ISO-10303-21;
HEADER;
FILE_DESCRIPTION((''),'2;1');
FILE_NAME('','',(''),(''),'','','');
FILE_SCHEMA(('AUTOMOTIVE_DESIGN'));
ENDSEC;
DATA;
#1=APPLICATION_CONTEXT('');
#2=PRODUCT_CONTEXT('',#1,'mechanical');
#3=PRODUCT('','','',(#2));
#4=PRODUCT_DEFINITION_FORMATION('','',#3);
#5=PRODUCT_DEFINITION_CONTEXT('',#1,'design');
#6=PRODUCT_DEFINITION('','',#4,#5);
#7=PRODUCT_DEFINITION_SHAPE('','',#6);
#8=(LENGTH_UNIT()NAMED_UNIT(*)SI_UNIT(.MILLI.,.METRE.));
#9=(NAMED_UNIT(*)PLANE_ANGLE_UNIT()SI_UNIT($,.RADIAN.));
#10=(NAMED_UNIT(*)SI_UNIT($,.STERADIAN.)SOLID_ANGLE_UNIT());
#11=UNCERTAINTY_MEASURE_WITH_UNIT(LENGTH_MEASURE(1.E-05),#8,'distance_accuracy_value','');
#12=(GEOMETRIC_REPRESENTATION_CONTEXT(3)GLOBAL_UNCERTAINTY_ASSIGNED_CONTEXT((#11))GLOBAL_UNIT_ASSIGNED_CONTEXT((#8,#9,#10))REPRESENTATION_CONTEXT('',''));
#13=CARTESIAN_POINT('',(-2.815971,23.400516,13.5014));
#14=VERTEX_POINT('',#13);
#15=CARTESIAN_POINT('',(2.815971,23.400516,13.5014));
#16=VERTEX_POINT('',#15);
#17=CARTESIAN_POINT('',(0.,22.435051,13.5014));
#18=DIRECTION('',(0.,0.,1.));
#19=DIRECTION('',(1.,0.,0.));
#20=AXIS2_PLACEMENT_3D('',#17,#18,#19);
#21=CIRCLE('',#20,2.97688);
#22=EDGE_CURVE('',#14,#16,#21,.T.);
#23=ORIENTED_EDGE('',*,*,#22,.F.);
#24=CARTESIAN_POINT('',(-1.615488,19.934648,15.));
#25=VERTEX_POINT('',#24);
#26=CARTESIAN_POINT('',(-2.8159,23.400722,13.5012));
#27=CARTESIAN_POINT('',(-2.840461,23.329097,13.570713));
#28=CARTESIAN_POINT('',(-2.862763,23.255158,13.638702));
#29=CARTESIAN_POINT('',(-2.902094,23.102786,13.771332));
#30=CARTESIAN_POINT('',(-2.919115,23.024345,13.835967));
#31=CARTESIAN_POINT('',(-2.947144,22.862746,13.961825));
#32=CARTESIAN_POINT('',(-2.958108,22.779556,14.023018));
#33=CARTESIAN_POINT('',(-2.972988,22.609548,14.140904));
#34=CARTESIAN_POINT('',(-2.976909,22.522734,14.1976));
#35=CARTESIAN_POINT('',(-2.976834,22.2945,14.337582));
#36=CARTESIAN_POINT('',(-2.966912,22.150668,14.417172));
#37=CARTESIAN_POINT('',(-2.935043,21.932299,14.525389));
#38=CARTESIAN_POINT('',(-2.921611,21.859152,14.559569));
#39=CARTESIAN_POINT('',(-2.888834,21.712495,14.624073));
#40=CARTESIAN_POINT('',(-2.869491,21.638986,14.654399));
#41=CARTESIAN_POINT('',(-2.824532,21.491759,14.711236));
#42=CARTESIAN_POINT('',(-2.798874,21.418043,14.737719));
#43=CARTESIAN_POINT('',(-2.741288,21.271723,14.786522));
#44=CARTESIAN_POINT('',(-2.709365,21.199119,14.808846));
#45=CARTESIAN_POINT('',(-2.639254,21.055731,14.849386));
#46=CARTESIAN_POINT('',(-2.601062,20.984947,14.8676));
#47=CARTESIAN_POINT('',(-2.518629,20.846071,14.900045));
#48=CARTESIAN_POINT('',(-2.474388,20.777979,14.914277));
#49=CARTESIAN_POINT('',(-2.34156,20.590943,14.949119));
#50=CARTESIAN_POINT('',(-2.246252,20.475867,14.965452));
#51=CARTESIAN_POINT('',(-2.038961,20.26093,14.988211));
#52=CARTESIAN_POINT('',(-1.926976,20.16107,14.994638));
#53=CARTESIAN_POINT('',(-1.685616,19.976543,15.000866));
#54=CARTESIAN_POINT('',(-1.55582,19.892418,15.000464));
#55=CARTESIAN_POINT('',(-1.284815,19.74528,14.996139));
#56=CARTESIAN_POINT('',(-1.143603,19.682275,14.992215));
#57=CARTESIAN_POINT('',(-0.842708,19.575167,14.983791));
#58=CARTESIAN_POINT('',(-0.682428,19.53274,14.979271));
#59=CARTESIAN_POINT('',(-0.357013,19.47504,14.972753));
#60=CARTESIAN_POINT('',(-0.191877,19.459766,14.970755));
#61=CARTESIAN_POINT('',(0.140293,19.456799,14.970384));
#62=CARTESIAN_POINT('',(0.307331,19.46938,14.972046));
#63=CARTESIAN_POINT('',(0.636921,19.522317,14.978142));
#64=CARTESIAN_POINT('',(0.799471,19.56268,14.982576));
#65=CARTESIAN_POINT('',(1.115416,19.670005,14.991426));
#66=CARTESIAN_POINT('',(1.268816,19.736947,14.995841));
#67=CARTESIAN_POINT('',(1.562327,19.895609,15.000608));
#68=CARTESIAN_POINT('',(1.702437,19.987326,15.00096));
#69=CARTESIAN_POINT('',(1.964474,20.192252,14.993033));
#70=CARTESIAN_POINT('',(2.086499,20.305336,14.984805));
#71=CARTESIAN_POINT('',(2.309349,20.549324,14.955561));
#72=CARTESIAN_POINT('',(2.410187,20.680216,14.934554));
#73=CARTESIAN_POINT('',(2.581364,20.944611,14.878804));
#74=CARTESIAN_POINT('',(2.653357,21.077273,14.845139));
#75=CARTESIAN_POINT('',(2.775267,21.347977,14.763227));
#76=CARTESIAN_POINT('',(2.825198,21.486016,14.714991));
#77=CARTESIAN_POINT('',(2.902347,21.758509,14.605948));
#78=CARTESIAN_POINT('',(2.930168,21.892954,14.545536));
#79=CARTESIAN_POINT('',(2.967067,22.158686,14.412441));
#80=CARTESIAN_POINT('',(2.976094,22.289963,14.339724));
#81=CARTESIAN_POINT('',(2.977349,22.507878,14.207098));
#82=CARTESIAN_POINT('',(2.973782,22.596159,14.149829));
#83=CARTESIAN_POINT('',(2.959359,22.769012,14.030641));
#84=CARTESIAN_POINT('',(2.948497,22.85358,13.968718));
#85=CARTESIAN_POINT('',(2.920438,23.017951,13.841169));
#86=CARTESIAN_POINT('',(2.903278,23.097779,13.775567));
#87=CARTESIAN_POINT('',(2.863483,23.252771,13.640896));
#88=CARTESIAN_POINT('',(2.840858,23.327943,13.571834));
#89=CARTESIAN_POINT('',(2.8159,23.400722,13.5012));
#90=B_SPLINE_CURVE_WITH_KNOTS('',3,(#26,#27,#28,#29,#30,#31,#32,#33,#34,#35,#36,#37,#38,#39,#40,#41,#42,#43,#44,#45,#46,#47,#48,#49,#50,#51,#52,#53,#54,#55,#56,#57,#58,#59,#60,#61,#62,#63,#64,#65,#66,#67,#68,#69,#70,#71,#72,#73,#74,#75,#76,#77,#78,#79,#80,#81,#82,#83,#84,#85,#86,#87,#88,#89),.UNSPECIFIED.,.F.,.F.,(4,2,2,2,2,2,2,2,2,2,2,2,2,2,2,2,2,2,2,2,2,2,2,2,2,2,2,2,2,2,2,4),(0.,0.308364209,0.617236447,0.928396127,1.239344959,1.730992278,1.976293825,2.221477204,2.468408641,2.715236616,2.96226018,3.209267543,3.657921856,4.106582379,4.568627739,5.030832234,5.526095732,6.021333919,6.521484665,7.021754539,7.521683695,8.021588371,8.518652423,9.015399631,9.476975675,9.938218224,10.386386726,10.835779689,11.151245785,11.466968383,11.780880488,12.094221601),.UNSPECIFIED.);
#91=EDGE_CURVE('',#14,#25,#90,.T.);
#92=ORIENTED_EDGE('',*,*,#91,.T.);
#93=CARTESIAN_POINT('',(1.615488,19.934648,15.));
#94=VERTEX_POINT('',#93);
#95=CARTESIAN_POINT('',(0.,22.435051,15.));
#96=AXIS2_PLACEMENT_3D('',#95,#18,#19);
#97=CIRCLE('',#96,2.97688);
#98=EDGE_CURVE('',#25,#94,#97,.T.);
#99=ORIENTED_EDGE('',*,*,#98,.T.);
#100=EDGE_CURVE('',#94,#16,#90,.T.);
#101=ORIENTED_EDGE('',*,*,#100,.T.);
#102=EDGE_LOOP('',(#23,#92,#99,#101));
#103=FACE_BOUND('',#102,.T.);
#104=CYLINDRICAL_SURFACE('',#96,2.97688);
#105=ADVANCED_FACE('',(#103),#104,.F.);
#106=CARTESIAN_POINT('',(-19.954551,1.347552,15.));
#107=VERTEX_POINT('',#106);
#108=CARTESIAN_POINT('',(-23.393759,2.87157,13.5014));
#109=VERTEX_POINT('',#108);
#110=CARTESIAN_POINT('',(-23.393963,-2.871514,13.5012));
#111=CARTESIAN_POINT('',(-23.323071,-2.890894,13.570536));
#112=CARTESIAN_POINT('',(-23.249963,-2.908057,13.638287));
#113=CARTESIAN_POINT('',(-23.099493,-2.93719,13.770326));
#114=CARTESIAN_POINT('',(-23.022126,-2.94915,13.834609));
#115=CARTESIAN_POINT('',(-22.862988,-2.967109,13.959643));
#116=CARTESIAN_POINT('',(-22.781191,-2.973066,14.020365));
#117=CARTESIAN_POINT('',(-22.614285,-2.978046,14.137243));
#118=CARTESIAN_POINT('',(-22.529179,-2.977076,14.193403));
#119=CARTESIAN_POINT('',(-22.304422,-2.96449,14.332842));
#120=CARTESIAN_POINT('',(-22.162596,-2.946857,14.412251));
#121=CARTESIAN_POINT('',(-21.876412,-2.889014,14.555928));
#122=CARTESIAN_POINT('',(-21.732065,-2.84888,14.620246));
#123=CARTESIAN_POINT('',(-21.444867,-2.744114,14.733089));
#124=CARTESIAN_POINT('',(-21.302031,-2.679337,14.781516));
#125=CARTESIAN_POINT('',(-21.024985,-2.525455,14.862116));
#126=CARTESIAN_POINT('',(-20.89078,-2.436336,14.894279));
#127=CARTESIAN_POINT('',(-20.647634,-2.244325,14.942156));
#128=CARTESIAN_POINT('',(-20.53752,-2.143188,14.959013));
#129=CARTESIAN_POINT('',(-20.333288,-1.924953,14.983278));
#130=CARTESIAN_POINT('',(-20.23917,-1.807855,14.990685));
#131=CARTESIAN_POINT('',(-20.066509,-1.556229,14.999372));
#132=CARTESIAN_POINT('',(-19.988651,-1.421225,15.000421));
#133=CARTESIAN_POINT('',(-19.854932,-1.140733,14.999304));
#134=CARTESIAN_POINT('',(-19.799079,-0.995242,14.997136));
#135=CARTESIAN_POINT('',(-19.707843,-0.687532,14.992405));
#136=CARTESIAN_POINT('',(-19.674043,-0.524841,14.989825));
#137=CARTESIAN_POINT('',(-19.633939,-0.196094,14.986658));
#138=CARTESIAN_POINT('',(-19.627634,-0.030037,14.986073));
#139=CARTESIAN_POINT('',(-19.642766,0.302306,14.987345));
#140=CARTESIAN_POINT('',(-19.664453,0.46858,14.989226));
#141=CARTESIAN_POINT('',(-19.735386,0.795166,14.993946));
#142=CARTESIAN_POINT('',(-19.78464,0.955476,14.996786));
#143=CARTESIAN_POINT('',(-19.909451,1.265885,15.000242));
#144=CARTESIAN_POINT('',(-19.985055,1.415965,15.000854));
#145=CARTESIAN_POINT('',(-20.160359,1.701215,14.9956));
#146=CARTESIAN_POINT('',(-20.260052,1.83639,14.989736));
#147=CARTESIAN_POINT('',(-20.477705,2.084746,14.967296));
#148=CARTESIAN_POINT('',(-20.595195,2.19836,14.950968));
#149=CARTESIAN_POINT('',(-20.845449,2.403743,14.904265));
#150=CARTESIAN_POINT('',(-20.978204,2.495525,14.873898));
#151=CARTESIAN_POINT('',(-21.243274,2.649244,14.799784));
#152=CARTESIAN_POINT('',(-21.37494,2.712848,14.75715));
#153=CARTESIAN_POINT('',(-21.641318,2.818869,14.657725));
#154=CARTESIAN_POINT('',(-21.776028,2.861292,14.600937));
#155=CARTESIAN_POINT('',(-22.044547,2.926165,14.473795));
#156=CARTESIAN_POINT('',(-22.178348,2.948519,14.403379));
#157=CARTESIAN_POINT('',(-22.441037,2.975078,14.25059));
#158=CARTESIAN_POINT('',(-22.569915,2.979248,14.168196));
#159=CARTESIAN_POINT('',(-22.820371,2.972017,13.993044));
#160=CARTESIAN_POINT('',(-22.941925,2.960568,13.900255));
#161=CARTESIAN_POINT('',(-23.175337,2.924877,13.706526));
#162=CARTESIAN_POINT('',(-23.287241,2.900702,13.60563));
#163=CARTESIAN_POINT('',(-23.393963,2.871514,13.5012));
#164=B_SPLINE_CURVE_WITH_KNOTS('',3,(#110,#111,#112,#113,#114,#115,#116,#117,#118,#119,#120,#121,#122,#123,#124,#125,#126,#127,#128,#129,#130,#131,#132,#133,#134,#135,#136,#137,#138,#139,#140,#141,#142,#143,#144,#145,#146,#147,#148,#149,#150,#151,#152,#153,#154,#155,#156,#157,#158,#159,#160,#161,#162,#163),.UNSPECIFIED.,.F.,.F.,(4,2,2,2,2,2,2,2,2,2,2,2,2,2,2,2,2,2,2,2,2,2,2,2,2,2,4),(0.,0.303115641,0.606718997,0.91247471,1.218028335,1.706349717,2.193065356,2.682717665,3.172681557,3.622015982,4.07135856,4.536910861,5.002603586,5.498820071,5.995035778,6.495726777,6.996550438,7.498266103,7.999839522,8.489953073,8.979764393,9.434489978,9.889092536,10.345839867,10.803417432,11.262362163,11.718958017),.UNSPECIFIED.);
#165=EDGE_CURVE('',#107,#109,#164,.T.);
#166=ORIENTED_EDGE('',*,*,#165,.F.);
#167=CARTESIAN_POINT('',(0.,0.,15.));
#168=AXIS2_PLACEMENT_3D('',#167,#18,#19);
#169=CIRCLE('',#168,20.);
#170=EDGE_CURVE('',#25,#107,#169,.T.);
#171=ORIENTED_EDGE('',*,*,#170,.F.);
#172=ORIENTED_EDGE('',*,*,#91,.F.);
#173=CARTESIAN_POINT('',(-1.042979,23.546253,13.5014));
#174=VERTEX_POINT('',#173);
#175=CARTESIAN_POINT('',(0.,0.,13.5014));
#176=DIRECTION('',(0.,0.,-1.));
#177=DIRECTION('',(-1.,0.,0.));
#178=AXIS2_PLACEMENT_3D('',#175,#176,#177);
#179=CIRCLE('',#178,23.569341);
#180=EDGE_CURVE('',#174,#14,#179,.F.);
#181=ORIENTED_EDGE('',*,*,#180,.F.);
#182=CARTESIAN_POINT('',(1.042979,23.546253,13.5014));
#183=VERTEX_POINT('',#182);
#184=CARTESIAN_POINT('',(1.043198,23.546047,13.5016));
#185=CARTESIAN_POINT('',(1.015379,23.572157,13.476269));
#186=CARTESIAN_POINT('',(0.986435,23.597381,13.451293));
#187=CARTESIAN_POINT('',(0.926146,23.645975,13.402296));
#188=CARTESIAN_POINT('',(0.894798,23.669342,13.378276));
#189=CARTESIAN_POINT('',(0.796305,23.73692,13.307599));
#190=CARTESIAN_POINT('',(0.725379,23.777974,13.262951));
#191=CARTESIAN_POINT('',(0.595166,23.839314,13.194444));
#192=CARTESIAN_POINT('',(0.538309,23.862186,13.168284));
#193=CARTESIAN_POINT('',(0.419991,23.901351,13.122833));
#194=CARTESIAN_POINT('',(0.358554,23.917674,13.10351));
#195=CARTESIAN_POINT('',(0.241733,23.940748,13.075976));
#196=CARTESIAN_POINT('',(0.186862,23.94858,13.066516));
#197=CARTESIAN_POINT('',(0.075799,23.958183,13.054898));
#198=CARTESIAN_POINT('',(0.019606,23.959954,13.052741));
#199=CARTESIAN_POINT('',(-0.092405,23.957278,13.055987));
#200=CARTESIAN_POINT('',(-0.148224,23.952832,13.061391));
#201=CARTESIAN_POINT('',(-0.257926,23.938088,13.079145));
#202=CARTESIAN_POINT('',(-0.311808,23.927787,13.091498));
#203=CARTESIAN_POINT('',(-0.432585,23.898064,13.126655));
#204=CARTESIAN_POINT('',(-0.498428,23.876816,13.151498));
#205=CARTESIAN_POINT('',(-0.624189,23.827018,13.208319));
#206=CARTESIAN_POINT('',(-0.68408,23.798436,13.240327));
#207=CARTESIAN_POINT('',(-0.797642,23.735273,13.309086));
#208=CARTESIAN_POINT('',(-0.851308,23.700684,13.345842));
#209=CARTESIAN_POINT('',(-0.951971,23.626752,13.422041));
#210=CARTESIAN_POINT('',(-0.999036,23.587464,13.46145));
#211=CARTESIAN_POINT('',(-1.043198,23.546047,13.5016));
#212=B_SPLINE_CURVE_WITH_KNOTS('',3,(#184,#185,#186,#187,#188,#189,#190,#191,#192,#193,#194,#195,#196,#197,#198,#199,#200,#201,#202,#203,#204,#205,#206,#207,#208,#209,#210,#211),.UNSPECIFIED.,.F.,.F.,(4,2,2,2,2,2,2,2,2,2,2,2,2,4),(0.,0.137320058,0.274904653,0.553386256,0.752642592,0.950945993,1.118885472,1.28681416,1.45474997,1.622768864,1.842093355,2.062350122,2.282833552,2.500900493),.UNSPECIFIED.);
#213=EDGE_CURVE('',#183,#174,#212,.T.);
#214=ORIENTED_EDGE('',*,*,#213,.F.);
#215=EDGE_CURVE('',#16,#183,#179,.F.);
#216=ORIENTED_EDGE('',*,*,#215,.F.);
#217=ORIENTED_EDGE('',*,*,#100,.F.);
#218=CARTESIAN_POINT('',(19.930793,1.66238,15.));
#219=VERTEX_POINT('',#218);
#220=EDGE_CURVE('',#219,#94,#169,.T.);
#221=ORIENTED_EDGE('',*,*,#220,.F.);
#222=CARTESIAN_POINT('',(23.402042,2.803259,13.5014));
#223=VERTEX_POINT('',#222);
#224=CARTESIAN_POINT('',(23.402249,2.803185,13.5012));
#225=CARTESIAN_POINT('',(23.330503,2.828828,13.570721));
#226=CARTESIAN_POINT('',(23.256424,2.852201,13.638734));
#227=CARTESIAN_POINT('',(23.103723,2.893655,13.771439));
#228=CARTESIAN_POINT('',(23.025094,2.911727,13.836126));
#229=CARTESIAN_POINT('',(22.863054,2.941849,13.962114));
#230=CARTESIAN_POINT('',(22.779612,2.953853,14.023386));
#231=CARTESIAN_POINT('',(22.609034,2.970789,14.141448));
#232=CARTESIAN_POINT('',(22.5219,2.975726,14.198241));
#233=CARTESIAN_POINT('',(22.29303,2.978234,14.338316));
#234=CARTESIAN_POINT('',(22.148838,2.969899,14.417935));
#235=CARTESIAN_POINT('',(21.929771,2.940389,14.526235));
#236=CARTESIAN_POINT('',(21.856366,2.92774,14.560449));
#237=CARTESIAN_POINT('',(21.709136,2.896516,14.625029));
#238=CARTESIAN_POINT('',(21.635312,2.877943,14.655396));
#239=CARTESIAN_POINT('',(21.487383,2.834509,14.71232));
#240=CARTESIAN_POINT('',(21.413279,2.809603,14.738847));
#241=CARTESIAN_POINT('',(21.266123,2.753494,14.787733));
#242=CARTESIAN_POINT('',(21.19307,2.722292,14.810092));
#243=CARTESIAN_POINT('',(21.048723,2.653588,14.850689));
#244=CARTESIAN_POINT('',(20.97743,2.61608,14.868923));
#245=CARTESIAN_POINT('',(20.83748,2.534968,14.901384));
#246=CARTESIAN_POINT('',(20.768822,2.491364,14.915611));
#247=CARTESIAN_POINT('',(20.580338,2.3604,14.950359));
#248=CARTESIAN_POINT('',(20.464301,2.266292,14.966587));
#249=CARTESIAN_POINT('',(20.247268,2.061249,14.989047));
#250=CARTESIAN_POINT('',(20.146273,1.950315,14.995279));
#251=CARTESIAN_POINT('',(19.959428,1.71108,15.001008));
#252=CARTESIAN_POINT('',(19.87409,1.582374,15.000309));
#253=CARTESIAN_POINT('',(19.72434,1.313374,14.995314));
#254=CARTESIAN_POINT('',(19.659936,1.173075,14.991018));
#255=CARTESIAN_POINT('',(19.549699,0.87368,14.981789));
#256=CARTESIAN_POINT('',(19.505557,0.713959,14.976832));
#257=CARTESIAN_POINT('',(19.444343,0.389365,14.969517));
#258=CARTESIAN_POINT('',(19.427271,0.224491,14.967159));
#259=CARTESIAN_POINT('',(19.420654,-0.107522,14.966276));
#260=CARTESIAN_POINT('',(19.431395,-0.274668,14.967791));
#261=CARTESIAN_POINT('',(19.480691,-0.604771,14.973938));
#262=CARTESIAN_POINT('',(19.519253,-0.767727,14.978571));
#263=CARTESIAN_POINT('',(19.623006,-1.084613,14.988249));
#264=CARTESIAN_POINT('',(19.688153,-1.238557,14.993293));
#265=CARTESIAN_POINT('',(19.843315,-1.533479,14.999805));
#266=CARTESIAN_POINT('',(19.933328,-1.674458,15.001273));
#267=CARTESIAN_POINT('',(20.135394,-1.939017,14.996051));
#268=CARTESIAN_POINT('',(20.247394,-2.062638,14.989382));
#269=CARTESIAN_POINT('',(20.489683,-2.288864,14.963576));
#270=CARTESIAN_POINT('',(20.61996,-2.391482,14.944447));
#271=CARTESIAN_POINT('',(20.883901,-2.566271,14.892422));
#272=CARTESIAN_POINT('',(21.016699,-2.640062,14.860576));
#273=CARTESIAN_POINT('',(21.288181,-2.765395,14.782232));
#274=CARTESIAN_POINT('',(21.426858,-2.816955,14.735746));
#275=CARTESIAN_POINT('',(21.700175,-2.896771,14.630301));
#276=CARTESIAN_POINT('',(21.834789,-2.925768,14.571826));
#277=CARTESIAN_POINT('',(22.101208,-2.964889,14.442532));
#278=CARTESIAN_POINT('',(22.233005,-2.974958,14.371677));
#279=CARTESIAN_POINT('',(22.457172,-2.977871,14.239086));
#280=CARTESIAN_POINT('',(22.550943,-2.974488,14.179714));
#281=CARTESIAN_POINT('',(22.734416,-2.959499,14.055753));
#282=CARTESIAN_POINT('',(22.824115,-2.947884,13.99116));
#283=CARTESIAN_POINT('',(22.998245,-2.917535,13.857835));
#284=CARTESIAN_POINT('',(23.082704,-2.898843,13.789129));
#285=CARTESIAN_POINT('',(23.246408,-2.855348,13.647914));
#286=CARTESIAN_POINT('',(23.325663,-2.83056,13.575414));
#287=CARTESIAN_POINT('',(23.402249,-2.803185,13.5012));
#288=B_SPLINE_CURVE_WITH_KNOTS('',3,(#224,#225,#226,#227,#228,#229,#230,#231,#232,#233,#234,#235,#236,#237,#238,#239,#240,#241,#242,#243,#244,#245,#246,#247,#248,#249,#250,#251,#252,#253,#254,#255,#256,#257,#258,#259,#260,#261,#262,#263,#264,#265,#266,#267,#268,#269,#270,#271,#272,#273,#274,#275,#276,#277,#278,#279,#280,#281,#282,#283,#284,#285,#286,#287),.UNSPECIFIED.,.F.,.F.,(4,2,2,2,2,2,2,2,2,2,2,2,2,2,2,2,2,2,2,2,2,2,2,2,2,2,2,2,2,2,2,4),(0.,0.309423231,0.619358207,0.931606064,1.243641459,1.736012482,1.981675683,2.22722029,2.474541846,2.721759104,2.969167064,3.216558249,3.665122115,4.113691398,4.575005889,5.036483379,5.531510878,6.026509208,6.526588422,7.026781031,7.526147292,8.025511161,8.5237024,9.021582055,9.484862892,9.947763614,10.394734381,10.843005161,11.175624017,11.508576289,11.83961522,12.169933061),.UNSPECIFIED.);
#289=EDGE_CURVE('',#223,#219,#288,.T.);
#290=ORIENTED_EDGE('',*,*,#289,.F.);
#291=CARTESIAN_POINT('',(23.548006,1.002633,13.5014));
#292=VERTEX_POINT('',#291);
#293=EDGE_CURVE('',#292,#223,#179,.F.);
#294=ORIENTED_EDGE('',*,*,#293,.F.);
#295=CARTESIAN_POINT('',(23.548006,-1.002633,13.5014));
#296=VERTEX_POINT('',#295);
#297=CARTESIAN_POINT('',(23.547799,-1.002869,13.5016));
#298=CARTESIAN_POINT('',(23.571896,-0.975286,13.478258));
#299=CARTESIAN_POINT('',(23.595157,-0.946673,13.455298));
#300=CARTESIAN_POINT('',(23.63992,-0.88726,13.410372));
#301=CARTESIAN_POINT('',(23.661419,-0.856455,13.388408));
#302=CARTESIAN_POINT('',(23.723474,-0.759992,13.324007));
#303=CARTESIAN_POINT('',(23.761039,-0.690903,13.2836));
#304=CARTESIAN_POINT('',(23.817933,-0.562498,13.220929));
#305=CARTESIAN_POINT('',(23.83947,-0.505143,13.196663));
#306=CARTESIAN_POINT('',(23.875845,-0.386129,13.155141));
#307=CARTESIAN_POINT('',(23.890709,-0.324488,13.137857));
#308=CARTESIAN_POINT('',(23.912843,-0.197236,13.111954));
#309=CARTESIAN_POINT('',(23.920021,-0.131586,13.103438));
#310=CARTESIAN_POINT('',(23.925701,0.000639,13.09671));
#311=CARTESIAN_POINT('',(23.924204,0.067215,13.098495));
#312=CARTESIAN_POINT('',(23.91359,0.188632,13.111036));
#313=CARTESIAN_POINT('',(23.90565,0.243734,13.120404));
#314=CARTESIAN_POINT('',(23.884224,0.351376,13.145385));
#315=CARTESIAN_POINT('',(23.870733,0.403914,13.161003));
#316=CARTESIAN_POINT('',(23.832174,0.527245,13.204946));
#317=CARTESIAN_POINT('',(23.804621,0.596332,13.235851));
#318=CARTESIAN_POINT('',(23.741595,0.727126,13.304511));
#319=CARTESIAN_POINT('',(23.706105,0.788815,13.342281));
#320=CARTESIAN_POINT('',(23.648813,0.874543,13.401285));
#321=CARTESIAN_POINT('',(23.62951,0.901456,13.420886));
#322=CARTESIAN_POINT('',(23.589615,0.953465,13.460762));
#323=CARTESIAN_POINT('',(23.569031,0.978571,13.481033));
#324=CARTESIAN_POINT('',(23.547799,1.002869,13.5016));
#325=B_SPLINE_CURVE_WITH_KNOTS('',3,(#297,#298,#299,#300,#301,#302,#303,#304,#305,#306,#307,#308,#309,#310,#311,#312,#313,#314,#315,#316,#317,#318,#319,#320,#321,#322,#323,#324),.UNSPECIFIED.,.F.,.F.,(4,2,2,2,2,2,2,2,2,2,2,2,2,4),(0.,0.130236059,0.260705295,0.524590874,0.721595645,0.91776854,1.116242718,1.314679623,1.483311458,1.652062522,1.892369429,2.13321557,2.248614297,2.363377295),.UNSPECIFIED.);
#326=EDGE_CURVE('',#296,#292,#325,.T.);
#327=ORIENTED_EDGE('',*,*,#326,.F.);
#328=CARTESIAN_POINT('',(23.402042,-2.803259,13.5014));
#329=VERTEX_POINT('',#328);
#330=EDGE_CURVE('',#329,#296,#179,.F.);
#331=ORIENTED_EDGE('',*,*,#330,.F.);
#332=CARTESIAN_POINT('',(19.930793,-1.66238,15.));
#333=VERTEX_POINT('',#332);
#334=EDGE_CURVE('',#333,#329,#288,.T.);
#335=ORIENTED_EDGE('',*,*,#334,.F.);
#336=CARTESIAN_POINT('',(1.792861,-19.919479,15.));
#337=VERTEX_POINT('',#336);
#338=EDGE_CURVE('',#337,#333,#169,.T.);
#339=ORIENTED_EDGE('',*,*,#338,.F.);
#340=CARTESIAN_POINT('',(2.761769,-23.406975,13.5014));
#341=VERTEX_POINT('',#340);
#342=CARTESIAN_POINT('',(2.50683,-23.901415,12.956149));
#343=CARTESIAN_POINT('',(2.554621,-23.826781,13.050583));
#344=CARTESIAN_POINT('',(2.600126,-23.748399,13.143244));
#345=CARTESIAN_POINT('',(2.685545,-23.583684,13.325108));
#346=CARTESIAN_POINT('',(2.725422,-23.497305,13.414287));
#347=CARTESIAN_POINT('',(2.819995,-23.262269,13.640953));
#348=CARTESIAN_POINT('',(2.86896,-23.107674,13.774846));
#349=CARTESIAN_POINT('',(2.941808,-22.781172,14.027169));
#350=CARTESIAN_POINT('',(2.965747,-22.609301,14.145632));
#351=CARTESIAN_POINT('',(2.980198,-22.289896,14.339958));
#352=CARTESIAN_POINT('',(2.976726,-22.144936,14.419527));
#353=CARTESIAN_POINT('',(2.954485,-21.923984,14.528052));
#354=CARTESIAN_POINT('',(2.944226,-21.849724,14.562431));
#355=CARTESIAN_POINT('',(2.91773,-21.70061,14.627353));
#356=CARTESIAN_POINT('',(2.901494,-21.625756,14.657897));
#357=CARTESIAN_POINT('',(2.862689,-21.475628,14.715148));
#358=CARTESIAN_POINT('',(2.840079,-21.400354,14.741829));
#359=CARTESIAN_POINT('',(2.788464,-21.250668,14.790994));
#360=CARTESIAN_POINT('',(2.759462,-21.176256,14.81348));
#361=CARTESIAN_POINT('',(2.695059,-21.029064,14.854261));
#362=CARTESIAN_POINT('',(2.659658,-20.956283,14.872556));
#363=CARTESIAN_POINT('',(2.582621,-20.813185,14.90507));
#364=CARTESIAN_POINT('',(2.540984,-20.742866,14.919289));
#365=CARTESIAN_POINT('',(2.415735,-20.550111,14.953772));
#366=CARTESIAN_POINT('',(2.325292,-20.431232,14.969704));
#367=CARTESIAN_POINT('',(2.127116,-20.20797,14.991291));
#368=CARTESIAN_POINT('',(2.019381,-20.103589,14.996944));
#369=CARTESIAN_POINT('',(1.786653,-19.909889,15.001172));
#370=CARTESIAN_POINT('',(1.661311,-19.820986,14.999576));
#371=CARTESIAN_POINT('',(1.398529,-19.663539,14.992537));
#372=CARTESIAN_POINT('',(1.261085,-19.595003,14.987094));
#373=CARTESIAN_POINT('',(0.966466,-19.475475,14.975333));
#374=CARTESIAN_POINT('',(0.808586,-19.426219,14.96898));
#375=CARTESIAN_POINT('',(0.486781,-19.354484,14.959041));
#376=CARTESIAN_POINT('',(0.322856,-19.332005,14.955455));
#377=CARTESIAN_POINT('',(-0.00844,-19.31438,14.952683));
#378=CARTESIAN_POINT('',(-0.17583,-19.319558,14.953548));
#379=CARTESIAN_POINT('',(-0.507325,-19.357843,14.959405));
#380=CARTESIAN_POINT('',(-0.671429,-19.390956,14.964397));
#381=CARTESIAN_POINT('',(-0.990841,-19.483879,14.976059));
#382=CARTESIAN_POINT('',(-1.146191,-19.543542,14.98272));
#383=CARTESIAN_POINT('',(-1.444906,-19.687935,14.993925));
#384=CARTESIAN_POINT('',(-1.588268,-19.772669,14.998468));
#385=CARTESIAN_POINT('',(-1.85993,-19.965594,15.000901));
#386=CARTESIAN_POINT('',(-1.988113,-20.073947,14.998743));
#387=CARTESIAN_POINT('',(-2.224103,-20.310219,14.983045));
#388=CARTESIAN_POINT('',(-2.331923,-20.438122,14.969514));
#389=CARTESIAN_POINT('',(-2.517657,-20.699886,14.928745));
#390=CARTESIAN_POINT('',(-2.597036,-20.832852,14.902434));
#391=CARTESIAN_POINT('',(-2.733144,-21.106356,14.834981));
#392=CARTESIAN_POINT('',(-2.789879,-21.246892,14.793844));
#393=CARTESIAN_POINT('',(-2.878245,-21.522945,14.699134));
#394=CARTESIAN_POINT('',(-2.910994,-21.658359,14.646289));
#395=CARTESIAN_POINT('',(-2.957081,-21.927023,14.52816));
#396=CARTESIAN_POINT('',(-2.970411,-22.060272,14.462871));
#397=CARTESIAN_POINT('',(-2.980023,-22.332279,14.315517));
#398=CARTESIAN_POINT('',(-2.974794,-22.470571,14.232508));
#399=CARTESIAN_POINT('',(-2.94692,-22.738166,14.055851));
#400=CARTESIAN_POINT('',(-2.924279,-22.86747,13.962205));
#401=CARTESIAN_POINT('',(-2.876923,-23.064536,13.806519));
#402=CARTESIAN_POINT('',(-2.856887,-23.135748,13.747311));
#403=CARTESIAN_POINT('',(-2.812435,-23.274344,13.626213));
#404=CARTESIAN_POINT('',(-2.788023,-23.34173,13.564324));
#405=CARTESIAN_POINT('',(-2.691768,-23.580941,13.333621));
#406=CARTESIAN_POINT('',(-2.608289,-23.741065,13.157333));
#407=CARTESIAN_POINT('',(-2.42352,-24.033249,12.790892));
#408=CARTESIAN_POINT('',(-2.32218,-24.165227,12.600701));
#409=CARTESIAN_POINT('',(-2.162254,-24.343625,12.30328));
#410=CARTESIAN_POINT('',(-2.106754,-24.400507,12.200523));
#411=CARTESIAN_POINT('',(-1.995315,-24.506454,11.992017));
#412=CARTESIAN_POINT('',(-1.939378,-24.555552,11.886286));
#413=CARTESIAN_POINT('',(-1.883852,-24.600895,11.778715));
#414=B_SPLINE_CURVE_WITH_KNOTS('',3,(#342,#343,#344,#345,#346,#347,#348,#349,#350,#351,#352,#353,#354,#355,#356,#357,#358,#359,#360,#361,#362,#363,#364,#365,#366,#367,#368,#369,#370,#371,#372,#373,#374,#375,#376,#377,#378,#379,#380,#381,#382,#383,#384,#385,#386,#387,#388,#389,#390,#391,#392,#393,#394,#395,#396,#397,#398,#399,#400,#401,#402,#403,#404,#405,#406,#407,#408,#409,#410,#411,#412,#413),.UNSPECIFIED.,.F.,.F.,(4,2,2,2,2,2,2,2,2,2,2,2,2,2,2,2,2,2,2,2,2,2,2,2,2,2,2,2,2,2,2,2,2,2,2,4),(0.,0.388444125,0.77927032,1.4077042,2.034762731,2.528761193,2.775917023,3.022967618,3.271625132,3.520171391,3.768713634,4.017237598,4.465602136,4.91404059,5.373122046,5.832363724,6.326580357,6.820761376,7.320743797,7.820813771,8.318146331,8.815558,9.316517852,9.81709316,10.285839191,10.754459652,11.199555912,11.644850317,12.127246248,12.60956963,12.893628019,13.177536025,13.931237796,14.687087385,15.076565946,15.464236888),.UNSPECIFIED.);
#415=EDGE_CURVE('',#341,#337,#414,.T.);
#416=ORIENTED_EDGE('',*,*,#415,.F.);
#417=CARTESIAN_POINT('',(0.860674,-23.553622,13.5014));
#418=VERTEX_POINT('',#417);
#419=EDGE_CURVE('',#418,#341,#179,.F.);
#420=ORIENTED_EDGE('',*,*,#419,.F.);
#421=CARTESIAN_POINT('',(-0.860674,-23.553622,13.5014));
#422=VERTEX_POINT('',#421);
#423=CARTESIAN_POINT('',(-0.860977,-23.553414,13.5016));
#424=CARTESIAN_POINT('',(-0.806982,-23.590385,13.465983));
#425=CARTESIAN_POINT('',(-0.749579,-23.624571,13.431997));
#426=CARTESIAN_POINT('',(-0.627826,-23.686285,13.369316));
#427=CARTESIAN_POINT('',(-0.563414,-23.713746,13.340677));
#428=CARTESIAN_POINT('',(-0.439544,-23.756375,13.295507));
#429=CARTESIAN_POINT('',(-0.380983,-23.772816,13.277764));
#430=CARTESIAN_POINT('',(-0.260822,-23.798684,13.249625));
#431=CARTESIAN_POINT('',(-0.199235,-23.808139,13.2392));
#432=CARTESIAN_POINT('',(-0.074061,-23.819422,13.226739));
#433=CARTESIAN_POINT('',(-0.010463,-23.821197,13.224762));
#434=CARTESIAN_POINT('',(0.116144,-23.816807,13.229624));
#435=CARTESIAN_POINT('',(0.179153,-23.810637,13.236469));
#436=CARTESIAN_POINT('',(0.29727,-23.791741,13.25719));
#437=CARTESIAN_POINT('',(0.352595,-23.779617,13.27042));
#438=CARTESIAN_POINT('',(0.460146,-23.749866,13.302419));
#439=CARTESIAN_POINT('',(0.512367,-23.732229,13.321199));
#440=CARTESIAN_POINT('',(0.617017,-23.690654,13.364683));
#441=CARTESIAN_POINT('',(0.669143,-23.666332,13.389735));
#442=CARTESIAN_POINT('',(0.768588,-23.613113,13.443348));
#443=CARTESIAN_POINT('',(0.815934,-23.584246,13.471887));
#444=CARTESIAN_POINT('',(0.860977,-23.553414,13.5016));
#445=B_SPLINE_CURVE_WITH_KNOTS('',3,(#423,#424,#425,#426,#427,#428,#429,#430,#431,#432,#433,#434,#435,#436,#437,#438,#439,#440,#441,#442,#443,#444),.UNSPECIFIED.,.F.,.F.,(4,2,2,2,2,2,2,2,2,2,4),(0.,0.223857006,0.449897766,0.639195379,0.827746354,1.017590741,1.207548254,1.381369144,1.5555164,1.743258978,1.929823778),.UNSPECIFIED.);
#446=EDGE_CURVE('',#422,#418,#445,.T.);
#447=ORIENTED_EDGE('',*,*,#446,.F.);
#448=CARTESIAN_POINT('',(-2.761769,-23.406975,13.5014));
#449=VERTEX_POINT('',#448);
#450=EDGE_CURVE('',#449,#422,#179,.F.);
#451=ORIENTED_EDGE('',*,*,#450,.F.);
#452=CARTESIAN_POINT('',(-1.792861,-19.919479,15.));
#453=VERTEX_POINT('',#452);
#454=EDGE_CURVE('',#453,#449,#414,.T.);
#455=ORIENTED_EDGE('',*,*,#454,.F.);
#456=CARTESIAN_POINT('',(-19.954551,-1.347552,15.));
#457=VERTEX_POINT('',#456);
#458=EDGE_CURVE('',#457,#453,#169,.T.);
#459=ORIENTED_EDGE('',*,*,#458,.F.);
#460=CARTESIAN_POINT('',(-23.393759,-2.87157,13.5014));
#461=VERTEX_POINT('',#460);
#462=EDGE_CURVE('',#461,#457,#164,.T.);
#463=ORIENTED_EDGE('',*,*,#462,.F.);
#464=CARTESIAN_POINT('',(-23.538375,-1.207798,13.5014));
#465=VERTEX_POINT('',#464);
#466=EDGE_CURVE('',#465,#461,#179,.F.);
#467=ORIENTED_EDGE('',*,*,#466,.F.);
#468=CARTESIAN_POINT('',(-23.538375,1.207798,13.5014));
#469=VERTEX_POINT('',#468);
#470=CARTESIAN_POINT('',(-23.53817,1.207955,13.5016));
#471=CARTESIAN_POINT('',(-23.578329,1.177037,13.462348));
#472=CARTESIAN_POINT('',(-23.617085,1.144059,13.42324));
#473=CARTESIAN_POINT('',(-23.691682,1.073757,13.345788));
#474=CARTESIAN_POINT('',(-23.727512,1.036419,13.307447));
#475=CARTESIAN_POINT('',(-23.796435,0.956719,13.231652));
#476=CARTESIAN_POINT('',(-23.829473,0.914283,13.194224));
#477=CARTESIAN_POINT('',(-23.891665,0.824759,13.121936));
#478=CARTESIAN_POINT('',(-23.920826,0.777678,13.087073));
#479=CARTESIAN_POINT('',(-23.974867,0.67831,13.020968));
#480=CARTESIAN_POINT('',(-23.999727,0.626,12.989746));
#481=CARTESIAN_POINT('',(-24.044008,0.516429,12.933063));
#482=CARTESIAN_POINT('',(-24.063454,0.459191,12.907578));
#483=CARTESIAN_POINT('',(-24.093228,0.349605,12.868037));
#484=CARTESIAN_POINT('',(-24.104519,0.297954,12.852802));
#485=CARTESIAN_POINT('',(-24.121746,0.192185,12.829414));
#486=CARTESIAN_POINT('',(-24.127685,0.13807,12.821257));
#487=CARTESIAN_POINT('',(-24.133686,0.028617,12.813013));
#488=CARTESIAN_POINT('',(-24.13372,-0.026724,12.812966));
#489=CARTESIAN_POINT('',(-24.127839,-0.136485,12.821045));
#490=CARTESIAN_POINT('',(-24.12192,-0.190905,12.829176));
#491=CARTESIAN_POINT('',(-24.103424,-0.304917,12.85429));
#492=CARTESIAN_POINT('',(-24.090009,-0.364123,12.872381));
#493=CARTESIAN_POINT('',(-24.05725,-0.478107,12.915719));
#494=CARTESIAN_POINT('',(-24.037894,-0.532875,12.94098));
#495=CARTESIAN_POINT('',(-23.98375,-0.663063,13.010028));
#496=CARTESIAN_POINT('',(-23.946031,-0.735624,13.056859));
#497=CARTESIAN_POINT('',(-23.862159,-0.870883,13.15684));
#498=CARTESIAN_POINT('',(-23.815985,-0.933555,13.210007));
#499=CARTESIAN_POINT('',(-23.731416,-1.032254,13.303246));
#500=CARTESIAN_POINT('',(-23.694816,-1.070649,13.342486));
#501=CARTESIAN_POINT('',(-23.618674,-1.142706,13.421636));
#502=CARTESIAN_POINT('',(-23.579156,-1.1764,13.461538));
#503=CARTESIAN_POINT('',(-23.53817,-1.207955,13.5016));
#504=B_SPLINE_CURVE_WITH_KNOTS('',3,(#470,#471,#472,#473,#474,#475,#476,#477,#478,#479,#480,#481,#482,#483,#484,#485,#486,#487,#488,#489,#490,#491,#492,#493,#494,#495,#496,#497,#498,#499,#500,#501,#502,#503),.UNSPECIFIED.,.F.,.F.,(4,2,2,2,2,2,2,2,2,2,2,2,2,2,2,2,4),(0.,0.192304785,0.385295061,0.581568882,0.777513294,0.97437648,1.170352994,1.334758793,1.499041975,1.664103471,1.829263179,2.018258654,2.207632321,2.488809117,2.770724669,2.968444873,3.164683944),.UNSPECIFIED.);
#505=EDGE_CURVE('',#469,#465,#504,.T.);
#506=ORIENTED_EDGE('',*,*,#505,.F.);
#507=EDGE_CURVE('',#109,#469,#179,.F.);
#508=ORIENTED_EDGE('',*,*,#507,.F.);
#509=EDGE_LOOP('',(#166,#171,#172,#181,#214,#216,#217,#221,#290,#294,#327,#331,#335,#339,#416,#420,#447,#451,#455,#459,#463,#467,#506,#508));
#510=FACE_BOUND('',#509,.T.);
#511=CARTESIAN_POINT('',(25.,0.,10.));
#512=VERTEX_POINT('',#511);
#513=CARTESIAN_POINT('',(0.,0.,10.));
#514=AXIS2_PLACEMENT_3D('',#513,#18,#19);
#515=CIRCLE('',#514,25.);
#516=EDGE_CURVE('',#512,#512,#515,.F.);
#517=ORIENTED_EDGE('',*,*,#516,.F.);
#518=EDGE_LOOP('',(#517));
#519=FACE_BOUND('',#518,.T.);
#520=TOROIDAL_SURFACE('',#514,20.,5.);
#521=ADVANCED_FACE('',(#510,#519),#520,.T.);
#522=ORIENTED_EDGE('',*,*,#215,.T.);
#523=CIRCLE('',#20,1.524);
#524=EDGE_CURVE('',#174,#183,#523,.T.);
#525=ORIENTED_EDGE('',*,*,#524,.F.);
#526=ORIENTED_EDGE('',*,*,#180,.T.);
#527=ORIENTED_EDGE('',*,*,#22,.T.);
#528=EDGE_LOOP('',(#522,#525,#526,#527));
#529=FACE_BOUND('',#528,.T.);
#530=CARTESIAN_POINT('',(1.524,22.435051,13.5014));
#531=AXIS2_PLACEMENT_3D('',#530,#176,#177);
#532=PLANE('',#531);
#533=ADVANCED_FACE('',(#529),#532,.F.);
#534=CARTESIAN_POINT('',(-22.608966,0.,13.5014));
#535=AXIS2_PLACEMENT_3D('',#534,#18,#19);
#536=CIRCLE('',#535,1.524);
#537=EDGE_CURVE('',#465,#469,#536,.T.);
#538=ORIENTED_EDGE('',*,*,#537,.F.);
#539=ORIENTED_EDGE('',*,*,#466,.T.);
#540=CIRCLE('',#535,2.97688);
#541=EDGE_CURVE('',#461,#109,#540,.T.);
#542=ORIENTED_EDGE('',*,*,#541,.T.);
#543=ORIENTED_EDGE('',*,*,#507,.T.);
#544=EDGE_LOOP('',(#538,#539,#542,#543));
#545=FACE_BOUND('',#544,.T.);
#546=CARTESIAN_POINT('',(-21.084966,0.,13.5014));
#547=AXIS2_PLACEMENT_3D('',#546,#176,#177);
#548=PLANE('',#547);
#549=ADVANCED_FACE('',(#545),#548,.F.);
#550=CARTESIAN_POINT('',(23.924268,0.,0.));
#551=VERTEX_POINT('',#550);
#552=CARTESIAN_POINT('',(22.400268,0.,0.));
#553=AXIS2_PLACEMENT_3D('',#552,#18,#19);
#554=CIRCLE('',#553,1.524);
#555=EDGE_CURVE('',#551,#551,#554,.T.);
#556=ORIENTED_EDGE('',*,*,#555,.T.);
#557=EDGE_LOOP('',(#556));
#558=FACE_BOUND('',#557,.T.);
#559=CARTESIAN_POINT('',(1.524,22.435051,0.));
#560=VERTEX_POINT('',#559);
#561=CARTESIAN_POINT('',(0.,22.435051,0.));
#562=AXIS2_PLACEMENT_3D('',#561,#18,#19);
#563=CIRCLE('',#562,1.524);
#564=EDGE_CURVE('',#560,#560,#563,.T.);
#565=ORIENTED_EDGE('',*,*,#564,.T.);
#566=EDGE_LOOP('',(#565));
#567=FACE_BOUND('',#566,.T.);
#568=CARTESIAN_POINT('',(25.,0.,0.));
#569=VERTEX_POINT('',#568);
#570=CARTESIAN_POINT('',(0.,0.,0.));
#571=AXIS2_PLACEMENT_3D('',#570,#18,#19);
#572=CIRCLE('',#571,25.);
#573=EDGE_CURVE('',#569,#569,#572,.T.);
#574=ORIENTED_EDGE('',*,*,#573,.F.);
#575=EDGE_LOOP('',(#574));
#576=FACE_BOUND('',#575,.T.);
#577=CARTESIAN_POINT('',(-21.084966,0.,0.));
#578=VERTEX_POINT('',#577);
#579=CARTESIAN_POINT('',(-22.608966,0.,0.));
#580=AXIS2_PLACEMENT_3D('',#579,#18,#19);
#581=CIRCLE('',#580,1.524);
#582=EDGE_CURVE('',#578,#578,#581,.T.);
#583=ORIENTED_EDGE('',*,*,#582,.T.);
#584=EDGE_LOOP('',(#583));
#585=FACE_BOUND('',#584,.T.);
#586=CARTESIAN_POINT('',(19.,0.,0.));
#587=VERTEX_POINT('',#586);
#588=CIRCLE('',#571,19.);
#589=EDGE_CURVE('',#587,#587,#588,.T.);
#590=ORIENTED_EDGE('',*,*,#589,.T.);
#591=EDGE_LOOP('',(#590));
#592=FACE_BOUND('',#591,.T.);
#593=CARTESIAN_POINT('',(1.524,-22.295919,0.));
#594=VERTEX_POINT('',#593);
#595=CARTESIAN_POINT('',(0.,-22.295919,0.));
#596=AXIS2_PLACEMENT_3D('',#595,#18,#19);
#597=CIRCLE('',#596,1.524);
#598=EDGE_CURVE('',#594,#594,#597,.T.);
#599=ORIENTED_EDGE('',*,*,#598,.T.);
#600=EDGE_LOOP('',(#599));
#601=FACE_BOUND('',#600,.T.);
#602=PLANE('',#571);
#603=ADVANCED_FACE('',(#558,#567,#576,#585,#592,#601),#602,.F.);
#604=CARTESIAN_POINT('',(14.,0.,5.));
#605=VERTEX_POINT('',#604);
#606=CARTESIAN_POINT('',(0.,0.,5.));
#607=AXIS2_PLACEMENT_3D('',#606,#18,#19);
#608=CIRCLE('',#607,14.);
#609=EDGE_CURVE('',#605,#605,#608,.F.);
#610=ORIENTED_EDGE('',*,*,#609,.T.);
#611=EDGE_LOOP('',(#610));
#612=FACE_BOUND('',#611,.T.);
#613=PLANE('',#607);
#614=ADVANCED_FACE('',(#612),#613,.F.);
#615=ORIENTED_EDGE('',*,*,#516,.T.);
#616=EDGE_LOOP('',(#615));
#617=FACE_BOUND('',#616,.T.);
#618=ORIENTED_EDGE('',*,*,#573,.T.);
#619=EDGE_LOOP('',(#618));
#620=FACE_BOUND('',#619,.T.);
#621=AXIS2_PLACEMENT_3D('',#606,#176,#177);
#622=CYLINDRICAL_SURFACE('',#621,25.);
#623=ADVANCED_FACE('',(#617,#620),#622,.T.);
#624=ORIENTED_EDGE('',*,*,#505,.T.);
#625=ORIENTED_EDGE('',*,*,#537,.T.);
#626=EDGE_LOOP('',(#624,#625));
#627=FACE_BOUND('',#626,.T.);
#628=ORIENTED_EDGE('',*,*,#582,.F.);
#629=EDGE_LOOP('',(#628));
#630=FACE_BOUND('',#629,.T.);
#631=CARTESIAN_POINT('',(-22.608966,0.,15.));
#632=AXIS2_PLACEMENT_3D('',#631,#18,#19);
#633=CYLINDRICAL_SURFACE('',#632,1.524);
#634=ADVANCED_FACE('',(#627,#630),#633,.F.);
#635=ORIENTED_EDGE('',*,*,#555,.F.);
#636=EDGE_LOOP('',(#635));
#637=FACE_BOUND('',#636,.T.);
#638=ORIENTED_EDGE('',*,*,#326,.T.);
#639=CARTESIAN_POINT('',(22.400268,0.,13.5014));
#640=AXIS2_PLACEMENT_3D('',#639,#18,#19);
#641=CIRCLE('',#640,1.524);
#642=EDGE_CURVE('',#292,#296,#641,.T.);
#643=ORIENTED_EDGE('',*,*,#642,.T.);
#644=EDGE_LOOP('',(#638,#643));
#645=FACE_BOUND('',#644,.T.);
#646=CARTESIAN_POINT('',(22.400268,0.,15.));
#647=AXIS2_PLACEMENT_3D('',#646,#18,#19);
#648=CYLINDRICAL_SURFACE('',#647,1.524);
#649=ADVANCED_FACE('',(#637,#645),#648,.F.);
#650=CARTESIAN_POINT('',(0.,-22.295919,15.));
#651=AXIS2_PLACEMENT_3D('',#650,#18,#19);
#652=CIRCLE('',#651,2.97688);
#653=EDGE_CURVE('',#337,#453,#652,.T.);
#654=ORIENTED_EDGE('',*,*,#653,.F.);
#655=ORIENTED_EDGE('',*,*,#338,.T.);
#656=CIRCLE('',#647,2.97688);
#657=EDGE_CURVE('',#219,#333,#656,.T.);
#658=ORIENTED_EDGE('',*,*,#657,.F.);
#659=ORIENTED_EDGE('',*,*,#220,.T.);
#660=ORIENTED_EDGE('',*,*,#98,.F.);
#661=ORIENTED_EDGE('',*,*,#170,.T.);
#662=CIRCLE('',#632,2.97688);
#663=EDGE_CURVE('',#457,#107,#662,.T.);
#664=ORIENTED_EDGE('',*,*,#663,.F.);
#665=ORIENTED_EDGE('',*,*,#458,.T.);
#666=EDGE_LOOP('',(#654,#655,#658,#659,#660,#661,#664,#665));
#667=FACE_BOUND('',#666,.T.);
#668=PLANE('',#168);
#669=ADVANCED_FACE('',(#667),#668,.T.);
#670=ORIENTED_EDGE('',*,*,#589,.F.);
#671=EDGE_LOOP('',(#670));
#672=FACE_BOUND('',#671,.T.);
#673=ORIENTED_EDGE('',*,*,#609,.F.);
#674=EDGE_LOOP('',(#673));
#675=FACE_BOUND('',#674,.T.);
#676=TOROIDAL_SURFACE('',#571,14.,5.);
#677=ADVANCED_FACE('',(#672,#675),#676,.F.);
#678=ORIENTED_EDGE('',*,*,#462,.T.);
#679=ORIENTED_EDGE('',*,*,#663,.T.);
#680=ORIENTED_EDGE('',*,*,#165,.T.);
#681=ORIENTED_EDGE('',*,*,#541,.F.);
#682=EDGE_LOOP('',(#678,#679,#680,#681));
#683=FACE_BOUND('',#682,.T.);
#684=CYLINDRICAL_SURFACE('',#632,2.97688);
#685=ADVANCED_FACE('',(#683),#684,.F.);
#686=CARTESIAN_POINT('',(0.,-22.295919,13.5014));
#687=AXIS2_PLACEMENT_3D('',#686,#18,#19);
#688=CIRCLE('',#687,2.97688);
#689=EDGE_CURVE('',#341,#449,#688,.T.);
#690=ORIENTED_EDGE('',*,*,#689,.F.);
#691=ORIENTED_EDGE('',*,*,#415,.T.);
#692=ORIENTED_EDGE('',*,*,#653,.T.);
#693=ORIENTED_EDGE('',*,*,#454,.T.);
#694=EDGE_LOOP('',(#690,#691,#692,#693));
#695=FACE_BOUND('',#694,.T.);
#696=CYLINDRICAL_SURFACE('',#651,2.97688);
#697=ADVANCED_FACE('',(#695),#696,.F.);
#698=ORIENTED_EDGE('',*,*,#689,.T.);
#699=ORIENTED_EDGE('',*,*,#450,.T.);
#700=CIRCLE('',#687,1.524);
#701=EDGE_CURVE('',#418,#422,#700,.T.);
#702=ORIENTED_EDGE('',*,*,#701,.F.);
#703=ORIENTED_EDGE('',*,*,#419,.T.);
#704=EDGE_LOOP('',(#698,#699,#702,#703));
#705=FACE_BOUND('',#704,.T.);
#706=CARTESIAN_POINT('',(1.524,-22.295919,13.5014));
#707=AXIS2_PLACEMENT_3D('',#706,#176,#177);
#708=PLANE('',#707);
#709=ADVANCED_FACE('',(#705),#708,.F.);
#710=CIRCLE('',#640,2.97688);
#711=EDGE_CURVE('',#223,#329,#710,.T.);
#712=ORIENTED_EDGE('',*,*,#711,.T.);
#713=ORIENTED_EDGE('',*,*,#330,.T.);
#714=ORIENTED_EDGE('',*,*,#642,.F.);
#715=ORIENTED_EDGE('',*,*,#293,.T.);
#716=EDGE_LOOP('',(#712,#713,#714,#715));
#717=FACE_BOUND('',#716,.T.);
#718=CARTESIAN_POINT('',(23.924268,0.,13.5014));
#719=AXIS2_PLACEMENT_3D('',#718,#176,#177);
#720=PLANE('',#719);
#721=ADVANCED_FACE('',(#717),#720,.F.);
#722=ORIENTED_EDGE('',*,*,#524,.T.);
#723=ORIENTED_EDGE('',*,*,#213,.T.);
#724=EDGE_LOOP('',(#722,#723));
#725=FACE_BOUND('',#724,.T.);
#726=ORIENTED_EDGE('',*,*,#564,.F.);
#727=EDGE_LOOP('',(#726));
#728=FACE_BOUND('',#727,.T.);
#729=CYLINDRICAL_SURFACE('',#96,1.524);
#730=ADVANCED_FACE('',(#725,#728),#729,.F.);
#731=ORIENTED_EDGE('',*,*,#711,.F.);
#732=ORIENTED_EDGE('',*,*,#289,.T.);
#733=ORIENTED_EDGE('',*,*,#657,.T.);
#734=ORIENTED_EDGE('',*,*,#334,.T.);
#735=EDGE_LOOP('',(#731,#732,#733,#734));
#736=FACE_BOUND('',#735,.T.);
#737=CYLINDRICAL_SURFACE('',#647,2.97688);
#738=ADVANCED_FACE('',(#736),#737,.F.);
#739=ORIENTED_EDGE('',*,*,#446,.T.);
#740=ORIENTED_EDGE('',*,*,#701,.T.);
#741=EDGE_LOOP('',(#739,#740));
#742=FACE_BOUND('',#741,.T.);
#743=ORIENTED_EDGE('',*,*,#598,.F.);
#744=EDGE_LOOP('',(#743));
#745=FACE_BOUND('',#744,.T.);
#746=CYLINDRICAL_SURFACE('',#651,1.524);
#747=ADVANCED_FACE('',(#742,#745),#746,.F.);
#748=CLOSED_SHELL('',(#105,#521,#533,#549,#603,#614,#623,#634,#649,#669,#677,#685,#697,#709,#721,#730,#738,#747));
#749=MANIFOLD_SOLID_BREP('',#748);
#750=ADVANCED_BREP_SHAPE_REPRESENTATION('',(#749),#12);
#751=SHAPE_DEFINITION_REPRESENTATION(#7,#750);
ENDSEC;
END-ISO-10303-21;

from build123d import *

# Parameters (mm, degrees)
SKETCH1_R                                           = 25
SKETCH1_R_2                                         = 19
BOSS_EXTRUDE1_DEPTH                                 = 5
SKETCH2_R                                           = 25
BOSS_EXTRUDE2_DEPTH                                 = 10
FILLET1_R                                           = 5
CBORE_FOR_3_BINDING_HEAD_MACHINE_SCREW1_D           = 3.048
CBORE_FOR_3_BINDING_HEAD_MACHINE_SCREW1_CBORE_D     = 5.95376
CBORE_FOR_3_BINDING_HEAD_MACHINE_SCREW1_CBORE_DEPTH = 1.4986


with BuildPart() as part:
    # Sketch1 → Boss-Extrude1 (new body)
    with BuildSketch(Plane.XY):
        Circle(SKETCH1_R)
        Circle(SKETCH1_R_2, mode=Mode.SUBTRACT)
    extrude(amount=BOSS_EXTRUDE1_DEPTH)

    # Sketch2 → Boss-Extrude2 (add)
    with BuildSketch(Plane.XY.offset(5)):
        Circle(SKETCH2_R)
    extrude(amount=BOSS_EXTRUDE2_DEPTH)

    # Fillet1
    fillet1_edges = [part.edges().sort_by_distance(p)[0] for p in [
        (-25, 0, 15),
        (-19, 0, 5),
    ]]
    fillet(fillet1_edges, radius=FILLET1_R - 0.0001)  # a hair under: the kernel refuses the full size

    # CBORE for #3 Binding Head Machine Screw1 (through all)
    with Locations(Plane.XY.offset(15)):
        with Locations((0, 22.435050854), (0, -22.295918756), (22.400267829, 0), (-22.608965977, 0)):
            CounterBoreHole(CBORE_FOR_3_BINDING_HEAD_MACHINE_SCREW1_D / 2, CBORE_FOR_3_BINDING_HEAD_MACHINE_SCREW1_CBORE_D / 2, CBORE_FOR_3_BINDING_HEAD_MACHINE_SCREW1_CBORE_DEPTH)


solid = part.part
